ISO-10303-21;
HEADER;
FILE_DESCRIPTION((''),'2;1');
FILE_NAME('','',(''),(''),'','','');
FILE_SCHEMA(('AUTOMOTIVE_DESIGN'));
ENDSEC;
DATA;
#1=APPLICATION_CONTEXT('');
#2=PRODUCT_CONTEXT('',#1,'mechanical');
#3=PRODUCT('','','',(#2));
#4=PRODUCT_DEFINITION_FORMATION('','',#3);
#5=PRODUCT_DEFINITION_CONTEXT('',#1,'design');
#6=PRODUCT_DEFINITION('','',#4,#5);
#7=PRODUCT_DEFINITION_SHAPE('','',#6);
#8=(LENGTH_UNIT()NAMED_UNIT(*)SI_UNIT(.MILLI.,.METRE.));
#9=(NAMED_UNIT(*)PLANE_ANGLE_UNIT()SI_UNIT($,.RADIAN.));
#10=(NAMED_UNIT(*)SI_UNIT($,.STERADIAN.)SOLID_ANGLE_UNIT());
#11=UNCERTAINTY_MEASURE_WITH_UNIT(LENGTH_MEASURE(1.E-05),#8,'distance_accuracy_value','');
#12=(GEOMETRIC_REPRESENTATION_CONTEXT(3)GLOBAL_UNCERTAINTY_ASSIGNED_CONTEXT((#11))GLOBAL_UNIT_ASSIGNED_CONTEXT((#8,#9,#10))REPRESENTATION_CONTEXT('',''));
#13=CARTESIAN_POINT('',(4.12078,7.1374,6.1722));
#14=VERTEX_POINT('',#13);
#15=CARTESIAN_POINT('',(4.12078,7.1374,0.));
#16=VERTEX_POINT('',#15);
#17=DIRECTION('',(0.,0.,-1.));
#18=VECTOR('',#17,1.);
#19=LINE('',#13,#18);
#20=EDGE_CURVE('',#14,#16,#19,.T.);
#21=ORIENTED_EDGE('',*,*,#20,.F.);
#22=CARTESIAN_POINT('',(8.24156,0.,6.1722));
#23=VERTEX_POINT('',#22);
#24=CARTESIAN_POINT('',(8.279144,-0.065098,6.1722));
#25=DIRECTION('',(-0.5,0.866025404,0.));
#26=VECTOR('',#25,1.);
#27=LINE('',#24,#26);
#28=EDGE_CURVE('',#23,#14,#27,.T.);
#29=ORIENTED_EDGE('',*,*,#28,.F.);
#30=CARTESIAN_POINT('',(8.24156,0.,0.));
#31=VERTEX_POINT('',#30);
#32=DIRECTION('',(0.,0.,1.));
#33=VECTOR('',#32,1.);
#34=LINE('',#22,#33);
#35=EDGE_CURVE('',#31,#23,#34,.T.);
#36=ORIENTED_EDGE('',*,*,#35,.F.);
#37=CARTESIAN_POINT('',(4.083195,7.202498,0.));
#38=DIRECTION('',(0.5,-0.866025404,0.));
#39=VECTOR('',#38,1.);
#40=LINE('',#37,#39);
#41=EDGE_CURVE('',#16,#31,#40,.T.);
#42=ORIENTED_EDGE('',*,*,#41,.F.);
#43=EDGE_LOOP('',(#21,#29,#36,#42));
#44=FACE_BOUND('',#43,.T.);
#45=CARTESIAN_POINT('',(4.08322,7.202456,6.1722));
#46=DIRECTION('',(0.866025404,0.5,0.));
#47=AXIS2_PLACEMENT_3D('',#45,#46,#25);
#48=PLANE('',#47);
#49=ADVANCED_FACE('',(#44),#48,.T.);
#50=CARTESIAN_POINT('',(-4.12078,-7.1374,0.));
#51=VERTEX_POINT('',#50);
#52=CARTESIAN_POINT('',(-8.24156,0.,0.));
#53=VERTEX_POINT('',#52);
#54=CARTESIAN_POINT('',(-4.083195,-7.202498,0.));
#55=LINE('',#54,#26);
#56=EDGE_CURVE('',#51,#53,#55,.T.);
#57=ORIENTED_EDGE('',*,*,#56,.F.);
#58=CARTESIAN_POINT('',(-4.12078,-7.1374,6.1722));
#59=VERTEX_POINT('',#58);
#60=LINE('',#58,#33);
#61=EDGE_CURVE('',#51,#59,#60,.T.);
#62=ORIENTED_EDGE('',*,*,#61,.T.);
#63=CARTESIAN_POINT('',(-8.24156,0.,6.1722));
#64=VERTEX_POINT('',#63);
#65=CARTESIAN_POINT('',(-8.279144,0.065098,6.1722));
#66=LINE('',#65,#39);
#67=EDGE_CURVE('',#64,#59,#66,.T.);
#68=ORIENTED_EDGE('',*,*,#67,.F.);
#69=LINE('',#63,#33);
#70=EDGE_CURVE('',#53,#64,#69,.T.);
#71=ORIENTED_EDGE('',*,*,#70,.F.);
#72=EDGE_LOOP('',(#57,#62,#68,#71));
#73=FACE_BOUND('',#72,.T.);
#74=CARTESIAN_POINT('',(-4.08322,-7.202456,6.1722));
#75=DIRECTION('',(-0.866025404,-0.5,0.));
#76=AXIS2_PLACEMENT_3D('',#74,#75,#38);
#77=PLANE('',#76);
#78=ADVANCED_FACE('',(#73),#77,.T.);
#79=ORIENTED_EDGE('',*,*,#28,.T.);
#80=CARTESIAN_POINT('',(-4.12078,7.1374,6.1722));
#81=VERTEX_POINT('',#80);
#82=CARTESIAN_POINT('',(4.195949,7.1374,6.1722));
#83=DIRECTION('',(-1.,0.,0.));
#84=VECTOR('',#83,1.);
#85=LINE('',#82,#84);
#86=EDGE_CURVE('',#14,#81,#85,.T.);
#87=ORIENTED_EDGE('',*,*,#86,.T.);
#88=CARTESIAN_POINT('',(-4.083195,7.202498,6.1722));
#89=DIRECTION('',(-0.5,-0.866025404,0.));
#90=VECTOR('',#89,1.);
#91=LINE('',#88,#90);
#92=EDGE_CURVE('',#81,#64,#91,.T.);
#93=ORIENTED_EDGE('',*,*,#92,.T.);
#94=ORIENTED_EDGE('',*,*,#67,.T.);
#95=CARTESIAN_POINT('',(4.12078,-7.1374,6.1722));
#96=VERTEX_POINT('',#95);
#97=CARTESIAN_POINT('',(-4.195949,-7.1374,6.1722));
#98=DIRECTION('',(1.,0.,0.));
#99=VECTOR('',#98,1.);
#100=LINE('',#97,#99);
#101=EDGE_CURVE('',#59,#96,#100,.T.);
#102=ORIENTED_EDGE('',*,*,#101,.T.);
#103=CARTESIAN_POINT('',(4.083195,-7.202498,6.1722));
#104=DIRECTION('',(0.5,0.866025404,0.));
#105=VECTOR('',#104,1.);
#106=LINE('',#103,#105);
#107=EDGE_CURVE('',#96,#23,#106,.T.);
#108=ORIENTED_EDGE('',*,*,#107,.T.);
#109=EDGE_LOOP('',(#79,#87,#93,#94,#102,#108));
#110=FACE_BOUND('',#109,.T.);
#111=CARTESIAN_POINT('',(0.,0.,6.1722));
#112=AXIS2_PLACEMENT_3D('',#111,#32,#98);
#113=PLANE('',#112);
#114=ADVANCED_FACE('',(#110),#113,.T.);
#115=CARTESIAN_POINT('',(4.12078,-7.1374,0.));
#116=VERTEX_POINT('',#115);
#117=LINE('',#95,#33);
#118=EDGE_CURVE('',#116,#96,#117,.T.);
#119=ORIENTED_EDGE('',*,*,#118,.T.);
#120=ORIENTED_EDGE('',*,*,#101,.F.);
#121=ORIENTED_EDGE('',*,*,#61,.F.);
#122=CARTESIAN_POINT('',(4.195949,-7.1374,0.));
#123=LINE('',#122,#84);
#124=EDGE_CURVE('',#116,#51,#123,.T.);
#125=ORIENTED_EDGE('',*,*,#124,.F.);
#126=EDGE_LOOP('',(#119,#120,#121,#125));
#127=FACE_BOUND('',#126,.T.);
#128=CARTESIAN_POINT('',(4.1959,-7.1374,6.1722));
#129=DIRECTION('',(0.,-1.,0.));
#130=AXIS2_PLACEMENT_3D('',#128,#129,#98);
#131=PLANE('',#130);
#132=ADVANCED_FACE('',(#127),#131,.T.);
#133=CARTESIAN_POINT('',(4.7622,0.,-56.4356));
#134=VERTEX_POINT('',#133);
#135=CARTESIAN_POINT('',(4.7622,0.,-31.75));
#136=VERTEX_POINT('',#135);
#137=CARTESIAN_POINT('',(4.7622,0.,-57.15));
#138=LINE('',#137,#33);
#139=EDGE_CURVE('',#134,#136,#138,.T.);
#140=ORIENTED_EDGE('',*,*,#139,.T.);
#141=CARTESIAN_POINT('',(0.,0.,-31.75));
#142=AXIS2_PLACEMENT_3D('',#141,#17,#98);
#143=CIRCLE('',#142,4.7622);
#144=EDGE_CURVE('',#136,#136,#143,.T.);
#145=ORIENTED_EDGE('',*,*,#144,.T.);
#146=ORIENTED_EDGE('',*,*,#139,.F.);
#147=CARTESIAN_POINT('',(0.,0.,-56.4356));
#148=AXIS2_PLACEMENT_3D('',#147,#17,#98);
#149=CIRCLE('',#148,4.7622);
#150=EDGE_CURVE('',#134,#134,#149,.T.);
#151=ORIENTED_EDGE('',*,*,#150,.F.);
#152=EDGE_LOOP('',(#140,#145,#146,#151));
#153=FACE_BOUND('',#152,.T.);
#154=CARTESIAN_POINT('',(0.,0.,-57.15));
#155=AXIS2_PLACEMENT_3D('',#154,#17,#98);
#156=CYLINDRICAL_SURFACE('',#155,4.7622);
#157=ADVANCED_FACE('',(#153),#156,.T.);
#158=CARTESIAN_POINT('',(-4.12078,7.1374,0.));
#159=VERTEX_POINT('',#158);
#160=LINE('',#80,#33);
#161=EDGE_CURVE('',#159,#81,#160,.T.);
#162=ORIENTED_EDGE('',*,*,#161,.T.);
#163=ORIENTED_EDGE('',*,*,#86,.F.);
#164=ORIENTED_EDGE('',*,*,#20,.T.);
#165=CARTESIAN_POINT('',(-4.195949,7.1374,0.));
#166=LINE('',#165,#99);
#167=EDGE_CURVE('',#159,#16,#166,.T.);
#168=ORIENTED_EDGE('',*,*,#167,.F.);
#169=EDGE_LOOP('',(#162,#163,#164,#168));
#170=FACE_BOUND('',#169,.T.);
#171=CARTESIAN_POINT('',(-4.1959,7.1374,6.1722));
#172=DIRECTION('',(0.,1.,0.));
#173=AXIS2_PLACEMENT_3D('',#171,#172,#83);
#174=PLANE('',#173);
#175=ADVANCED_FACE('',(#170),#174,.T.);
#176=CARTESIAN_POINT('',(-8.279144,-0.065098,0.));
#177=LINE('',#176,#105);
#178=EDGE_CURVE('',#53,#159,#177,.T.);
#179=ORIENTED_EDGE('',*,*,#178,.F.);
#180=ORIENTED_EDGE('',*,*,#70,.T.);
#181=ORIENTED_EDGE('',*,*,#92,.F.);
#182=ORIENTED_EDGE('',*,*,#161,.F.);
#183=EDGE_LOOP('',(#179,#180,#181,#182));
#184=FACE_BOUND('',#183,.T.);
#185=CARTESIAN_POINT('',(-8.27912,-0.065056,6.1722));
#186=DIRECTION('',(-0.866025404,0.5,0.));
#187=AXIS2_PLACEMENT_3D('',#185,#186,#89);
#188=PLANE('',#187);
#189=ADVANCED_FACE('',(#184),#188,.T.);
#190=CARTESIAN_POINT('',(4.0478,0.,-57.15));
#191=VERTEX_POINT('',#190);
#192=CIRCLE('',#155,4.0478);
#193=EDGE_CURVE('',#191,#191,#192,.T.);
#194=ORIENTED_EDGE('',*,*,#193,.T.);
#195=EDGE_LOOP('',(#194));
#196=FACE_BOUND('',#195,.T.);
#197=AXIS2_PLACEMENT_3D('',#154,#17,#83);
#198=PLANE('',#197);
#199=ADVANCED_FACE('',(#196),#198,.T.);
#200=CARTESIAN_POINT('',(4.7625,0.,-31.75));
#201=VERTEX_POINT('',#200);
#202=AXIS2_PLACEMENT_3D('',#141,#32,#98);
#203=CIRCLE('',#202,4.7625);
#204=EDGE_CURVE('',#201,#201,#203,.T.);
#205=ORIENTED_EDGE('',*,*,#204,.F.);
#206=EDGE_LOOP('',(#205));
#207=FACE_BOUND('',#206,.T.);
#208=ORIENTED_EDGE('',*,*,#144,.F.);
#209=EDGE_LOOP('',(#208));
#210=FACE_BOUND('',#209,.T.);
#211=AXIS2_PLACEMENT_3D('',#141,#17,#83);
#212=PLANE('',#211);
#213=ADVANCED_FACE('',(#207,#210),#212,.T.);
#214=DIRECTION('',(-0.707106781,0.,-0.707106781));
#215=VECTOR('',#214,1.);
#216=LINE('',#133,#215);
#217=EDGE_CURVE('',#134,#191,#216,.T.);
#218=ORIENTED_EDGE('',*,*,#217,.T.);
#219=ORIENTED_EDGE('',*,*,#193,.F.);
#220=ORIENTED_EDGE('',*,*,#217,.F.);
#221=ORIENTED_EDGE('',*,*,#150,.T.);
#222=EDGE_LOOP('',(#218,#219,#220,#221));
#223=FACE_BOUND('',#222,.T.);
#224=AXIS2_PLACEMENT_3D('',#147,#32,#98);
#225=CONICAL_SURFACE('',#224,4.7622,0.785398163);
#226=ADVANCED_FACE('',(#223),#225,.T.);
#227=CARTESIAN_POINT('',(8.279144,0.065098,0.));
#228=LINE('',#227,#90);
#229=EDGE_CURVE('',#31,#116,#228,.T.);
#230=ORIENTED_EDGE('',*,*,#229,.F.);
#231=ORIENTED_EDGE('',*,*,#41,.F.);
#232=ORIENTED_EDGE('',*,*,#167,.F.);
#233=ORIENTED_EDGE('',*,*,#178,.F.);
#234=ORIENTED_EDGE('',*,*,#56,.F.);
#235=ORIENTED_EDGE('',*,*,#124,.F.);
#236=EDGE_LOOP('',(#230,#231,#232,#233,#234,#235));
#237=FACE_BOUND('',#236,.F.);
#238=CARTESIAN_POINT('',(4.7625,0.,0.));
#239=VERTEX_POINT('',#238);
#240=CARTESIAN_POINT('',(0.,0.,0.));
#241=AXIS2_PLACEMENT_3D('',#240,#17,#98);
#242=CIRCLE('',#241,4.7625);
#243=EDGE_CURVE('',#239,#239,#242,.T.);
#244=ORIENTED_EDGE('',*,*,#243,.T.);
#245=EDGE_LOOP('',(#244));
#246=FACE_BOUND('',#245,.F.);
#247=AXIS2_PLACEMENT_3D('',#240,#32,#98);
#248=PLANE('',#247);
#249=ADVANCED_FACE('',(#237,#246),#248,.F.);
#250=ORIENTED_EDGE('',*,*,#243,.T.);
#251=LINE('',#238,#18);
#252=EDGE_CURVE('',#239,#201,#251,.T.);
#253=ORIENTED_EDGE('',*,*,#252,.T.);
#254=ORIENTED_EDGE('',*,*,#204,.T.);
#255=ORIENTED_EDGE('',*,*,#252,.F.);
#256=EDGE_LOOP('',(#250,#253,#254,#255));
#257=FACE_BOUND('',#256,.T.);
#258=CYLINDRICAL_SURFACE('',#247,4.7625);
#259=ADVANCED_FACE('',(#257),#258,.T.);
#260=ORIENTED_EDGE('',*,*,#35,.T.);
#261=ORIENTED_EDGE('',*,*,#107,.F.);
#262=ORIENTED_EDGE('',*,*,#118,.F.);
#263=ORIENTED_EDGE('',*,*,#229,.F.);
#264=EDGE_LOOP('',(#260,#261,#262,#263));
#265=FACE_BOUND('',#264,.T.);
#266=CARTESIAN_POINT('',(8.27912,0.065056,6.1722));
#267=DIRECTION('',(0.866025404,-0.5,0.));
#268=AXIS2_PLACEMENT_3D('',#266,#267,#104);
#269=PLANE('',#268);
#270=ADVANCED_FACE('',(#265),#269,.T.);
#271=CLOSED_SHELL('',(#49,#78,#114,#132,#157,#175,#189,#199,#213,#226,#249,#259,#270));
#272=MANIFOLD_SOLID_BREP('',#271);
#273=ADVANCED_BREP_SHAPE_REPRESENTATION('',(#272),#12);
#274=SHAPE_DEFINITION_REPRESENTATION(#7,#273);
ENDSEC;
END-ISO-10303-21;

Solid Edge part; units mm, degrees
sketch "Sketch1" plane through (0, 0, 0) normal (0, 0, 1) x (1, 0, 0)
  circle A0 centre (0, 0) radius 8.2794
  dimension "D1" = 16.5588
extrude "Protrusion1" add sketch "Sketch1" along normal blind 6.1722
sketch "Sketch2" plane through (0, 0, 0) normal (0, 0, -1) x (1, 0, 0)
  circle A0 centre (0, 0) radius 4.7625
extrude "Protrusion2" add sketch "Sketch2" along normal blind 57.15
sketch "Sketch3" plane through (0, 0, -57.15) normal (0, 0, -1) x (1, 0, 0)
  circle A0 centre (0, 0) radius 4.7622
extrude "Cutout1" cut sketch "Sketch3" against normal blind 25.4 flip side to cut
chamfer "Chamfer_1" distance 0.7144 angle 45 1 edges at (-4.7622, 0, -57.15)
sketch "Sketch4" plane through (0, 0, 6.1722) normal (0, 0, 1) x (1, 0, 0)
  line L0 (-4.1959, 7.1374) -> (4.1959, 7.1374)
  dimension "D1" = 14.2748
extrude "Cutout2" cut sketch "Sketch4" against normal up to next material side at (0, 7.1874, 6.1722)
pattern_circular "Pattern1" count 6 over 360 about axis through (0, 0, 6.1722) along (0, 0, 1) of "Cutout2"
properties part number "24103041"
